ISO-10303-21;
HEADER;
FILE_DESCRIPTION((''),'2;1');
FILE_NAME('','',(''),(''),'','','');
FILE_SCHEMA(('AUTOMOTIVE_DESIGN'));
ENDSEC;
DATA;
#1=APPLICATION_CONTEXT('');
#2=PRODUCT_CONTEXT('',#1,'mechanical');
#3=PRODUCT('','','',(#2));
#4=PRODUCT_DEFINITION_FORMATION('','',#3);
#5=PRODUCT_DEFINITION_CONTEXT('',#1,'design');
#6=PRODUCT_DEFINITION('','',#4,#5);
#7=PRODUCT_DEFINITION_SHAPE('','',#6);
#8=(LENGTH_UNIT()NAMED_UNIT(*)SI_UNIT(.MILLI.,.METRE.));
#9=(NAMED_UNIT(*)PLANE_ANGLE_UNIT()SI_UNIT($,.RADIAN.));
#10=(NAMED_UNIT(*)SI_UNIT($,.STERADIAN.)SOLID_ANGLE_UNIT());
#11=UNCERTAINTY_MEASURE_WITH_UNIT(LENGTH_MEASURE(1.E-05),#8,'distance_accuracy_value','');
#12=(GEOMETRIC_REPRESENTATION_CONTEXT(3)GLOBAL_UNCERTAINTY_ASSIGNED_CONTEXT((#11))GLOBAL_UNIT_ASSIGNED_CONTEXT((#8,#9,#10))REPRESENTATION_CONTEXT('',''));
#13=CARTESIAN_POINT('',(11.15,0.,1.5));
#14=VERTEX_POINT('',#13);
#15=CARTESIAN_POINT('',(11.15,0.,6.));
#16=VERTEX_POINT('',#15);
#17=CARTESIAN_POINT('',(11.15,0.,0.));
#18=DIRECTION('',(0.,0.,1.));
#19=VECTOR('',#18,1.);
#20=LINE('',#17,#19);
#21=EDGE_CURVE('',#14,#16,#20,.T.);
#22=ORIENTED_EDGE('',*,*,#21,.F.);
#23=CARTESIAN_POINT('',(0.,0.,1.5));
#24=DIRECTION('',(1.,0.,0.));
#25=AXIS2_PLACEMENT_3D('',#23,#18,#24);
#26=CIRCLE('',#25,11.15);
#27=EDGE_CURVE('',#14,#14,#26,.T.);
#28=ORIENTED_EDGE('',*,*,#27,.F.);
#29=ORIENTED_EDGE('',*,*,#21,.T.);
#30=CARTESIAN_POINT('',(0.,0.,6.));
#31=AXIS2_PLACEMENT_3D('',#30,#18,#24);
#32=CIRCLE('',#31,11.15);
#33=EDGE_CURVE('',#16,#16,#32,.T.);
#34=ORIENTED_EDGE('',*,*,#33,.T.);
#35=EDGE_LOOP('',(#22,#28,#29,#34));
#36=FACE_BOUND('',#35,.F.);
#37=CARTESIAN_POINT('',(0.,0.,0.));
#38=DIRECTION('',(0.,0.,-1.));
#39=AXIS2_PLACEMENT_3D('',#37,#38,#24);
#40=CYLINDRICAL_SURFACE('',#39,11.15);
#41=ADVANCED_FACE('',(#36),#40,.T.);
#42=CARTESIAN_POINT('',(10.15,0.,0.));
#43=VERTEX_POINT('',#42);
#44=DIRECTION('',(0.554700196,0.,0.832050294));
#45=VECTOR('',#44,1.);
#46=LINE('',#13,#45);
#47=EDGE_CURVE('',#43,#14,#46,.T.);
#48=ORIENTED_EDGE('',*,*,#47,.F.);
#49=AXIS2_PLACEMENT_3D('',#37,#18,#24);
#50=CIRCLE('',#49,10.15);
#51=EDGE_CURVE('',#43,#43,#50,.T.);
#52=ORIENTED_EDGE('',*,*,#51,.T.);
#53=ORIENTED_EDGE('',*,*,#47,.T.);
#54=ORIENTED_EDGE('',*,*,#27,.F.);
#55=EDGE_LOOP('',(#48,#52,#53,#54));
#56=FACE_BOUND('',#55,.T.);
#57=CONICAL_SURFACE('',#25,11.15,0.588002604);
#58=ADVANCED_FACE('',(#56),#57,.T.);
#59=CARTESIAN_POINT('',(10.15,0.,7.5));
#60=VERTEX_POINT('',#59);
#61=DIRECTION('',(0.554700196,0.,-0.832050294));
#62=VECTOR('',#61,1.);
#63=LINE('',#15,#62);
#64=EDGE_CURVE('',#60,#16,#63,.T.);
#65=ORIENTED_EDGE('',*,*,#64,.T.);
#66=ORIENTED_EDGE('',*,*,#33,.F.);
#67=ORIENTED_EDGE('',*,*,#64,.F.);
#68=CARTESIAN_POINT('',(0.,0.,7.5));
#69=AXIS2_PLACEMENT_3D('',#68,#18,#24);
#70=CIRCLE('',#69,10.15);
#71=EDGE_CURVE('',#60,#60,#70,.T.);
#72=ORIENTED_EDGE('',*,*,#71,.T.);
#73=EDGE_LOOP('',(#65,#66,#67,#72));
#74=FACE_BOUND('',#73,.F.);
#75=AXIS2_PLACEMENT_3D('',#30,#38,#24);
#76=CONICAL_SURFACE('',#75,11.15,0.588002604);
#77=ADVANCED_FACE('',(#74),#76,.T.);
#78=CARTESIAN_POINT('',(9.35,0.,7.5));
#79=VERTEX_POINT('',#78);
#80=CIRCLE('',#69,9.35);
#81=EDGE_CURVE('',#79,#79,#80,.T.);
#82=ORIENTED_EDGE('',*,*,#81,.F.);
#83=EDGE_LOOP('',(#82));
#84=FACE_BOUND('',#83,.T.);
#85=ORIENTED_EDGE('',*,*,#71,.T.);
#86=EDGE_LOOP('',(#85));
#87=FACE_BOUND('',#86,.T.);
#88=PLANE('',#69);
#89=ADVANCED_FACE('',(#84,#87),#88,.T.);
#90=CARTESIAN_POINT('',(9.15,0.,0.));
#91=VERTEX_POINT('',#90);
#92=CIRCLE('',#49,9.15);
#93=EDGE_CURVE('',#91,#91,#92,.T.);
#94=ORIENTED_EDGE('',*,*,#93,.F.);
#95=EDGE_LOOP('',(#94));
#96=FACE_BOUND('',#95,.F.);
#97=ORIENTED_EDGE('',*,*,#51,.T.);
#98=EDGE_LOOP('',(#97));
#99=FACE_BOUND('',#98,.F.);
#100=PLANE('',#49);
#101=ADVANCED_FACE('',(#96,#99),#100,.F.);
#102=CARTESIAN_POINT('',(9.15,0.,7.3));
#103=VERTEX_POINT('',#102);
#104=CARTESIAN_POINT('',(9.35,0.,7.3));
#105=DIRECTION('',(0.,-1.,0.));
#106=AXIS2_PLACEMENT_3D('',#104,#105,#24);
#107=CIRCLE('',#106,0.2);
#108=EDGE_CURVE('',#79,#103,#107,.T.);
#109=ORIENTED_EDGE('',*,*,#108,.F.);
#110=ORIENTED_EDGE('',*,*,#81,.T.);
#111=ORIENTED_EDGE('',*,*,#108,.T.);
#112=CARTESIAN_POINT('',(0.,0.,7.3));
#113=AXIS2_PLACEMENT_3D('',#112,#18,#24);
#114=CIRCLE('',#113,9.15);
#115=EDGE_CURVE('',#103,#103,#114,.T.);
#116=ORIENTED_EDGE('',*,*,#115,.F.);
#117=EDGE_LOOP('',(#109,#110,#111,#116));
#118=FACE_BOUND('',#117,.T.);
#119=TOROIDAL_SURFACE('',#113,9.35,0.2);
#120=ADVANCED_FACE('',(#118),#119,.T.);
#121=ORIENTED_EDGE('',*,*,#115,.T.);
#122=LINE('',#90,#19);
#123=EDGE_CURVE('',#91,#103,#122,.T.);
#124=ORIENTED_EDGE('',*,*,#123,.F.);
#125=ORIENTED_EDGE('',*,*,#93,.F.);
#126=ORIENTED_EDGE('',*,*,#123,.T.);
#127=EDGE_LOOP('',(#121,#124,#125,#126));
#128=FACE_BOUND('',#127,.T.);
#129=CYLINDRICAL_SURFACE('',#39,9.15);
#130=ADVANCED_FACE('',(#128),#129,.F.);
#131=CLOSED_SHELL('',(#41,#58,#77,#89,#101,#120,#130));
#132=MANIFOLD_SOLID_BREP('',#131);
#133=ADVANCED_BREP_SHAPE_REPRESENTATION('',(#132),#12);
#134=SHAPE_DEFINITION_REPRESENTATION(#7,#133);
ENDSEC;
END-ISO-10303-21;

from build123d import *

# Parameters (mm, degrees)
F0_R       = 11.15
F0_R_2     = 9.15
F1_DEPTH   = 7.5
F2_SIZE2   = 1.5
F2_SIZE    = 1
F2_2_SIZE2 = 1.5
F2_2_SIZE  = 1
F3_R       = 0.2


# Not quite as in the source:
# - a feature names something its author has since deleted; it is built from what else it names


with BuildPart() as f1:
    # F0 (on Top) → F1 (new body)
    with BuildSketch(Plane.XY):
        Circle(F0_R)
        Circle(F0_R_2, mode=Mode.SUBTRACT)
    extrude(amount=F1_DEPTH)

    # F2
    f2_edges = [f1.edges().sort_by_distance(p)[0] for p in [
        (-11.15, 0, 7.5),
    ]]
    f2_side = f1.faces().sort_by_distance((-10.83463, 0, 7.5))[0]
    chamfer(f2_edges, length=F2_SIZE, length2=F2_SIZE2, reference=f2_side)

    # F2#2
    f2_2_edges = [f1.edges().sort_by_distance(p)[0] for p in [
        (-11.15, 0, 0),
    ]]
    f2_2_side = f1.faces().sort_by_distance((-10.83463, 0, 0))[0]
    chamfer(f2_2_edges, length=F2_2_SIZE, length2=F2_2_SIZE2, reference=f2_2_side)

    # F3
    f3_edges = [f1.edges().sort_by_distance(p)[0] for p in [
        (-9.15, 0, 7.5),
    ]]
    fillet(f3_edges, radius=F3_R)


solid = f1.part
